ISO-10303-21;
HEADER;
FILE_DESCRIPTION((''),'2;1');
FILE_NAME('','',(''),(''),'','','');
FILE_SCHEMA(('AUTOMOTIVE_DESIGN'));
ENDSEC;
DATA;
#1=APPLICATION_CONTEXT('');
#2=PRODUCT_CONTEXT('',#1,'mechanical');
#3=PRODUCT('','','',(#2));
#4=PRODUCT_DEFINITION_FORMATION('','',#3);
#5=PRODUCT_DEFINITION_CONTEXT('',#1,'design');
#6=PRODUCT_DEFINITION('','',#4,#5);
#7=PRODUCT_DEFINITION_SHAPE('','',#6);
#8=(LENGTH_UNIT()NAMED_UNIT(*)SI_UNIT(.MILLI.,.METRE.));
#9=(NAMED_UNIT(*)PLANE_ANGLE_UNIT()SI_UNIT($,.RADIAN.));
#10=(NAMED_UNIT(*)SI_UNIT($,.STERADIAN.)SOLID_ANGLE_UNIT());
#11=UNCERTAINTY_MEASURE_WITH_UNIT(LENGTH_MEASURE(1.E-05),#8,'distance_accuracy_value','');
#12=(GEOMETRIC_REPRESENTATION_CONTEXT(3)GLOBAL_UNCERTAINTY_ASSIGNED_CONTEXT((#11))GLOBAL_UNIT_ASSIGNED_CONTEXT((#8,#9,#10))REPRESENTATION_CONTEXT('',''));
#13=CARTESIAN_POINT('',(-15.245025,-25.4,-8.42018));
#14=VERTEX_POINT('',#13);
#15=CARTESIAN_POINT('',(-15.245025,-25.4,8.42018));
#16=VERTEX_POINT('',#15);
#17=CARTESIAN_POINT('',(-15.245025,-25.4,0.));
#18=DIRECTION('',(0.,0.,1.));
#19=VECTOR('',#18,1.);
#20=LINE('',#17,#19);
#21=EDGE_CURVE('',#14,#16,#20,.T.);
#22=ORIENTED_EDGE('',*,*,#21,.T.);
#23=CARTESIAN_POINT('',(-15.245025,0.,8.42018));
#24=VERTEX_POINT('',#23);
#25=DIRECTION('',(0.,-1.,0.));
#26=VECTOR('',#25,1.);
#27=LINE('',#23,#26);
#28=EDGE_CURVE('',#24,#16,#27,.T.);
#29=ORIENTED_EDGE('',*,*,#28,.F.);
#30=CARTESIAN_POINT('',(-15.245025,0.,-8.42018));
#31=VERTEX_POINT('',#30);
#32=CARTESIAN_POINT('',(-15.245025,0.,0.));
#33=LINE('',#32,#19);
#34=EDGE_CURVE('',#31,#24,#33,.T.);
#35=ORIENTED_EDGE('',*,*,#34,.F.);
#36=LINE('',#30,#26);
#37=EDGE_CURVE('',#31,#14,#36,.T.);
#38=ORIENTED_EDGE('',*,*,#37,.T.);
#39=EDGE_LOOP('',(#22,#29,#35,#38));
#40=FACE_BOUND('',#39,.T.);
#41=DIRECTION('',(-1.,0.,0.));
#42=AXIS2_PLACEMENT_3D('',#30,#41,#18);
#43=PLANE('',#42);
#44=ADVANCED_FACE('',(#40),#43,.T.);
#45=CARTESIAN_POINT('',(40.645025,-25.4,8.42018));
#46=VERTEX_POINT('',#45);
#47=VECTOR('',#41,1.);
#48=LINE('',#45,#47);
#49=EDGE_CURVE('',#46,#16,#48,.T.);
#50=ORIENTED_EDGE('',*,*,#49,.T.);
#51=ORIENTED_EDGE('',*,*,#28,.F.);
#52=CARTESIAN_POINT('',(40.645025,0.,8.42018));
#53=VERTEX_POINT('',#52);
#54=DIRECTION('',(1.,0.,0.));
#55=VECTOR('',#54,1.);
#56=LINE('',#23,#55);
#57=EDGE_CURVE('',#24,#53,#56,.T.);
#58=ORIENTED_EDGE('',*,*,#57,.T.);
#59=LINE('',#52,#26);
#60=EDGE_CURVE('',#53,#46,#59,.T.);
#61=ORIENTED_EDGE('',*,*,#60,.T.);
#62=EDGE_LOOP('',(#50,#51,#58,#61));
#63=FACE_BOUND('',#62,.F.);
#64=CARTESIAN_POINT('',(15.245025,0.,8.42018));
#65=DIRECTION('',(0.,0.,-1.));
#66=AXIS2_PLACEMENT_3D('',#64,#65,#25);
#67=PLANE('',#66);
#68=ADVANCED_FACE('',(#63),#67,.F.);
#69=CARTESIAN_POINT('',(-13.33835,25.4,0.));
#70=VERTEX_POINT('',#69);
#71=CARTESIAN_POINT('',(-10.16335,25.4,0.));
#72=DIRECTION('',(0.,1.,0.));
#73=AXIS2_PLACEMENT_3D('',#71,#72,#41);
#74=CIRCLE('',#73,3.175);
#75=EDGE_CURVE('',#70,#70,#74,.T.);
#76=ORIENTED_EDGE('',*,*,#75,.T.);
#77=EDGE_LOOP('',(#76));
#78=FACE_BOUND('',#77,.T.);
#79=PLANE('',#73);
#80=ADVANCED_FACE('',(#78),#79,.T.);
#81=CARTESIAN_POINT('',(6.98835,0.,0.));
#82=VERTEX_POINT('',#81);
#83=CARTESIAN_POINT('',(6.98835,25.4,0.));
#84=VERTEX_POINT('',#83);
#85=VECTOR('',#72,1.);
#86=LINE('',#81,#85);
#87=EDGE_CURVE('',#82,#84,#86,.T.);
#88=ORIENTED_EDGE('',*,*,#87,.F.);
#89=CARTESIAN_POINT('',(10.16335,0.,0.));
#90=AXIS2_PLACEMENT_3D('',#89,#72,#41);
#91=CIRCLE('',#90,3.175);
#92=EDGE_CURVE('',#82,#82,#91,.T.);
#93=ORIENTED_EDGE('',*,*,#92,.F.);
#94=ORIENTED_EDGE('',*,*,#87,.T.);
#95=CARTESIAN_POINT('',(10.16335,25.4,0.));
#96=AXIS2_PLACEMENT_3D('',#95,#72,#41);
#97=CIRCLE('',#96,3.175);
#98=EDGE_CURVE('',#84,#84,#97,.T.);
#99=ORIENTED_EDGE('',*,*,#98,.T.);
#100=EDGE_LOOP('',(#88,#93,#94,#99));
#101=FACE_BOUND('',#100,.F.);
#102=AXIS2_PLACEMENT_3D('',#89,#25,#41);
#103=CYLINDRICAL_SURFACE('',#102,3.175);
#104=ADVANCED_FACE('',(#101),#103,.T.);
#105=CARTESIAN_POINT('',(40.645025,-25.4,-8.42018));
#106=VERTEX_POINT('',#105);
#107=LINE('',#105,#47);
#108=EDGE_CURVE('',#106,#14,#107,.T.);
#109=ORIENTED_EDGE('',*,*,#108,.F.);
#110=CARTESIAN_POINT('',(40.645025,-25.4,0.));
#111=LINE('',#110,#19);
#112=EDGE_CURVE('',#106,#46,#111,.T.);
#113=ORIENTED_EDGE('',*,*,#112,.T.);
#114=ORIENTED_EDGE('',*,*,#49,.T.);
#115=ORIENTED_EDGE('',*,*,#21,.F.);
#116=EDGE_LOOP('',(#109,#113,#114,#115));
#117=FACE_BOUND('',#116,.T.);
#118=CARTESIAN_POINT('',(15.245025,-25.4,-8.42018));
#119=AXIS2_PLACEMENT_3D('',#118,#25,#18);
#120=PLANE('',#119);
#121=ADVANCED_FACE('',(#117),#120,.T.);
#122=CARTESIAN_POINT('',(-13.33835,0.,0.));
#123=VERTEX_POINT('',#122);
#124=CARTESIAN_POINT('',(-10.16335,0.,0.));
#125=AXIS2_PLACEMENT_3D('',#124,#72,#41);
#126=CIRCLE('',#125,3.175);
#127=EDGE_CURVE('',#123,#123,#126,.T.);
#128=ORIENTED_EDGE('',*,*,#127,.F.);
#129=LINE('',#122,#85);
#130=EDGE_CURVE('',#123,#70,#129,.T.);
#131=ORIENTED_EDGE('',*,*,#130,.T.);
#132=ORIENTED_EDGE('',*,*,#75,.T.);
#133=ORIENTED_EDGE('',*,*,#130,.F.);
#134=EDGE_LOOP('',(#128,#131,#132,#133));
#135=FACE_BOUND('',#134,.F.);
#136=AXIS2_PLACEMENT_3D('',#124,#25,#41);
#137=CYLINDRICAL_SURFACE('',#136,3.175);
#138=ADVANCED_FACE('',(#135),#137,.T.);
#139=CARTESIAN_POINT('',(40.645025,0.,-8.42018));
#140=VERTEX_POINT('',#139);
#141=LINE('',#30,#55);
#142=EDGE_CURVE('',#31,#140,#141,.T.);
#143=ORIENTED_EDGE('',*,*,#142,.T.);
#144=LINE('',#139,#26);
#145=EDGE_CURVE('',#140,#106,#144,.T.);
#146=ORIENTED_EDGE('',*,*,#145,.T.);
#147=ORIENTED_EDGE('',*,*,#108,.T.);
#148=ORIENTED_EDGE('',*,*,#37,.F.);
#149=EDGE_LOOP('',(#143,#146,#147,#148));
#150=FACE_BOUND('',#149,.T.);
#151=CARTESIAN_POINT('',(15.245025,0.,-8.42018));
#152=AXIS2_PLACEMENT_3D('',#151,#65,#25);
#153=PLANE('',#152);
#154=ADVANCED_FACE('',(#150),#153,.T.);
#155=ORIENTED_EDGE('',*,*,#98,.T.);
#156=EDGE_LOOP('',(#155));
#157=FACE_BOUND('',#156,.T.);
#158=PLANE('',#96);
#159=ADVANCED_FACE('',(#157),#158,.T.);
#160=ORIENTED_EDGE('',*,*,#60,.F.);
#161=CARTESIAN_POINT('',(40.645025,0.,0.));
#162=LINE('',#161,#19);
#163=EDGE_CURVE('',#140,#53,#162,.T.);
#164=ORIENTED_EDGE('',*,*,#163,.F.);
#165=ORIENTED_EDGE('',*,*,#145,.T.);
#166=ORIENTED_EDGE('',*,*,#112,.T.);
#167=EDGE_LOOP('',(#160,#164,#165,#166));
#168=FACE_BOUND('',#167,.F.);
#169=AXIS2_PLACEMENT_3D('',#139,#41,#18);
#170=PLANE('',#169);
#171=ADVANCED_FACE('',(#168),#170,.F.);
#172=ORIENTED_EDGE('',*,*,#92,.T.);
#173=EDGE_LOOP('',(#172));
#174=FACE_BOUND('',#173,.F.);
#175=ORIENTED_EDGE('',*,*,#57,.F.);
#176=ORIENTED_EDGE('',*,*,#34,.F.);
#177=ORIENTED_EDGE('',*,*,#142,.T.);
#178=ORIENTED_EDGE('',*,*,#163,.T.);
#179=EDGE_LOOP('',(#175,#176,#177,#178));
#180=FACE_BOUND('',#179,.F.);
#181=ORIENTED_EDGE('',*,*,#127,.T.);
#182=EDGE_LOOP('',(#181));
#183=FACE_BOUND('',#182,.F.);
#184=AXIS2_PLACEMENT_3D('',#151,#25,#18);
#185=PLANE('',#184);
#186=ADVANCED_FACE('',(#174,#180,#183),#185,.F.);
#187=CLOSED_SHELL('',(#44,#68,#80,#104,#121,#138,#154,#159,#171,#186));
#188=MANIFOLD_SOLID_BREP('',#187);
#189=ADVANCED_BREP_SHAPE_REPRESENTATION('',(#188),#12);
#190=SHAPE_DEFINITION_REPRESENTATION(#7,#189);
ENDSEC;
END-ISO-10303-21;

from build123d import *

# Parameters (mm, degrees)
F0_W     = 30.4900507075
F0_H     = 16.8403594638
F0_R     = 3.175
F1_DEPTH = 25.4
F2_R     = 3.175
F3_DEPTH = 25.4
F4_DEPTH = 25.4


# Not quite as in the source:
# - a feature names something its author has since deleted; it is built from what else it names


with BuildPart() as f1:
    # F0 (on Front) → F1 (new body)
    with BuildSketch(Plane.XZ):
        Rectangle(F0_W, F0_H)
        with Locations((-7.6225126769, 0)):
            Circle(F0_R, mode=Mode.SUBTRACT)
        with Locations((7.6225126769, 0)):
            Circle(F0_R, mode=Mode.SUBTRACT)
        with Locations((-7.6225126769, 0)):
            Circle(F0_R)
        with Locations((7.6225126769, 0)):
            Circle(F0_R)
    extrude(amount=F1_DEPTH)

    # F2 (on face) → F3 (join)
    with BuildSketch(Plane(origin=(0, 0, 0), x_dir=(-1, 0, 0), z_dir=(0, 1, 0))):
        with Locations((10.1633502358, 0)):
            Circle(F2_R)
        with Locations((-10.1633502358, 0)):
            Circle(F2_R)
    extrude(amount=F3_DEPTH)

    # F4 (add): a face of the model
    f4_faces = [f1.faces().sort_by_distance(p)[0] for p in [
        (15.2450253537, -12.7, 0),
    ]]
    extrude(f4_faces, amount=F4_DEPTH)


solid = f1.part
